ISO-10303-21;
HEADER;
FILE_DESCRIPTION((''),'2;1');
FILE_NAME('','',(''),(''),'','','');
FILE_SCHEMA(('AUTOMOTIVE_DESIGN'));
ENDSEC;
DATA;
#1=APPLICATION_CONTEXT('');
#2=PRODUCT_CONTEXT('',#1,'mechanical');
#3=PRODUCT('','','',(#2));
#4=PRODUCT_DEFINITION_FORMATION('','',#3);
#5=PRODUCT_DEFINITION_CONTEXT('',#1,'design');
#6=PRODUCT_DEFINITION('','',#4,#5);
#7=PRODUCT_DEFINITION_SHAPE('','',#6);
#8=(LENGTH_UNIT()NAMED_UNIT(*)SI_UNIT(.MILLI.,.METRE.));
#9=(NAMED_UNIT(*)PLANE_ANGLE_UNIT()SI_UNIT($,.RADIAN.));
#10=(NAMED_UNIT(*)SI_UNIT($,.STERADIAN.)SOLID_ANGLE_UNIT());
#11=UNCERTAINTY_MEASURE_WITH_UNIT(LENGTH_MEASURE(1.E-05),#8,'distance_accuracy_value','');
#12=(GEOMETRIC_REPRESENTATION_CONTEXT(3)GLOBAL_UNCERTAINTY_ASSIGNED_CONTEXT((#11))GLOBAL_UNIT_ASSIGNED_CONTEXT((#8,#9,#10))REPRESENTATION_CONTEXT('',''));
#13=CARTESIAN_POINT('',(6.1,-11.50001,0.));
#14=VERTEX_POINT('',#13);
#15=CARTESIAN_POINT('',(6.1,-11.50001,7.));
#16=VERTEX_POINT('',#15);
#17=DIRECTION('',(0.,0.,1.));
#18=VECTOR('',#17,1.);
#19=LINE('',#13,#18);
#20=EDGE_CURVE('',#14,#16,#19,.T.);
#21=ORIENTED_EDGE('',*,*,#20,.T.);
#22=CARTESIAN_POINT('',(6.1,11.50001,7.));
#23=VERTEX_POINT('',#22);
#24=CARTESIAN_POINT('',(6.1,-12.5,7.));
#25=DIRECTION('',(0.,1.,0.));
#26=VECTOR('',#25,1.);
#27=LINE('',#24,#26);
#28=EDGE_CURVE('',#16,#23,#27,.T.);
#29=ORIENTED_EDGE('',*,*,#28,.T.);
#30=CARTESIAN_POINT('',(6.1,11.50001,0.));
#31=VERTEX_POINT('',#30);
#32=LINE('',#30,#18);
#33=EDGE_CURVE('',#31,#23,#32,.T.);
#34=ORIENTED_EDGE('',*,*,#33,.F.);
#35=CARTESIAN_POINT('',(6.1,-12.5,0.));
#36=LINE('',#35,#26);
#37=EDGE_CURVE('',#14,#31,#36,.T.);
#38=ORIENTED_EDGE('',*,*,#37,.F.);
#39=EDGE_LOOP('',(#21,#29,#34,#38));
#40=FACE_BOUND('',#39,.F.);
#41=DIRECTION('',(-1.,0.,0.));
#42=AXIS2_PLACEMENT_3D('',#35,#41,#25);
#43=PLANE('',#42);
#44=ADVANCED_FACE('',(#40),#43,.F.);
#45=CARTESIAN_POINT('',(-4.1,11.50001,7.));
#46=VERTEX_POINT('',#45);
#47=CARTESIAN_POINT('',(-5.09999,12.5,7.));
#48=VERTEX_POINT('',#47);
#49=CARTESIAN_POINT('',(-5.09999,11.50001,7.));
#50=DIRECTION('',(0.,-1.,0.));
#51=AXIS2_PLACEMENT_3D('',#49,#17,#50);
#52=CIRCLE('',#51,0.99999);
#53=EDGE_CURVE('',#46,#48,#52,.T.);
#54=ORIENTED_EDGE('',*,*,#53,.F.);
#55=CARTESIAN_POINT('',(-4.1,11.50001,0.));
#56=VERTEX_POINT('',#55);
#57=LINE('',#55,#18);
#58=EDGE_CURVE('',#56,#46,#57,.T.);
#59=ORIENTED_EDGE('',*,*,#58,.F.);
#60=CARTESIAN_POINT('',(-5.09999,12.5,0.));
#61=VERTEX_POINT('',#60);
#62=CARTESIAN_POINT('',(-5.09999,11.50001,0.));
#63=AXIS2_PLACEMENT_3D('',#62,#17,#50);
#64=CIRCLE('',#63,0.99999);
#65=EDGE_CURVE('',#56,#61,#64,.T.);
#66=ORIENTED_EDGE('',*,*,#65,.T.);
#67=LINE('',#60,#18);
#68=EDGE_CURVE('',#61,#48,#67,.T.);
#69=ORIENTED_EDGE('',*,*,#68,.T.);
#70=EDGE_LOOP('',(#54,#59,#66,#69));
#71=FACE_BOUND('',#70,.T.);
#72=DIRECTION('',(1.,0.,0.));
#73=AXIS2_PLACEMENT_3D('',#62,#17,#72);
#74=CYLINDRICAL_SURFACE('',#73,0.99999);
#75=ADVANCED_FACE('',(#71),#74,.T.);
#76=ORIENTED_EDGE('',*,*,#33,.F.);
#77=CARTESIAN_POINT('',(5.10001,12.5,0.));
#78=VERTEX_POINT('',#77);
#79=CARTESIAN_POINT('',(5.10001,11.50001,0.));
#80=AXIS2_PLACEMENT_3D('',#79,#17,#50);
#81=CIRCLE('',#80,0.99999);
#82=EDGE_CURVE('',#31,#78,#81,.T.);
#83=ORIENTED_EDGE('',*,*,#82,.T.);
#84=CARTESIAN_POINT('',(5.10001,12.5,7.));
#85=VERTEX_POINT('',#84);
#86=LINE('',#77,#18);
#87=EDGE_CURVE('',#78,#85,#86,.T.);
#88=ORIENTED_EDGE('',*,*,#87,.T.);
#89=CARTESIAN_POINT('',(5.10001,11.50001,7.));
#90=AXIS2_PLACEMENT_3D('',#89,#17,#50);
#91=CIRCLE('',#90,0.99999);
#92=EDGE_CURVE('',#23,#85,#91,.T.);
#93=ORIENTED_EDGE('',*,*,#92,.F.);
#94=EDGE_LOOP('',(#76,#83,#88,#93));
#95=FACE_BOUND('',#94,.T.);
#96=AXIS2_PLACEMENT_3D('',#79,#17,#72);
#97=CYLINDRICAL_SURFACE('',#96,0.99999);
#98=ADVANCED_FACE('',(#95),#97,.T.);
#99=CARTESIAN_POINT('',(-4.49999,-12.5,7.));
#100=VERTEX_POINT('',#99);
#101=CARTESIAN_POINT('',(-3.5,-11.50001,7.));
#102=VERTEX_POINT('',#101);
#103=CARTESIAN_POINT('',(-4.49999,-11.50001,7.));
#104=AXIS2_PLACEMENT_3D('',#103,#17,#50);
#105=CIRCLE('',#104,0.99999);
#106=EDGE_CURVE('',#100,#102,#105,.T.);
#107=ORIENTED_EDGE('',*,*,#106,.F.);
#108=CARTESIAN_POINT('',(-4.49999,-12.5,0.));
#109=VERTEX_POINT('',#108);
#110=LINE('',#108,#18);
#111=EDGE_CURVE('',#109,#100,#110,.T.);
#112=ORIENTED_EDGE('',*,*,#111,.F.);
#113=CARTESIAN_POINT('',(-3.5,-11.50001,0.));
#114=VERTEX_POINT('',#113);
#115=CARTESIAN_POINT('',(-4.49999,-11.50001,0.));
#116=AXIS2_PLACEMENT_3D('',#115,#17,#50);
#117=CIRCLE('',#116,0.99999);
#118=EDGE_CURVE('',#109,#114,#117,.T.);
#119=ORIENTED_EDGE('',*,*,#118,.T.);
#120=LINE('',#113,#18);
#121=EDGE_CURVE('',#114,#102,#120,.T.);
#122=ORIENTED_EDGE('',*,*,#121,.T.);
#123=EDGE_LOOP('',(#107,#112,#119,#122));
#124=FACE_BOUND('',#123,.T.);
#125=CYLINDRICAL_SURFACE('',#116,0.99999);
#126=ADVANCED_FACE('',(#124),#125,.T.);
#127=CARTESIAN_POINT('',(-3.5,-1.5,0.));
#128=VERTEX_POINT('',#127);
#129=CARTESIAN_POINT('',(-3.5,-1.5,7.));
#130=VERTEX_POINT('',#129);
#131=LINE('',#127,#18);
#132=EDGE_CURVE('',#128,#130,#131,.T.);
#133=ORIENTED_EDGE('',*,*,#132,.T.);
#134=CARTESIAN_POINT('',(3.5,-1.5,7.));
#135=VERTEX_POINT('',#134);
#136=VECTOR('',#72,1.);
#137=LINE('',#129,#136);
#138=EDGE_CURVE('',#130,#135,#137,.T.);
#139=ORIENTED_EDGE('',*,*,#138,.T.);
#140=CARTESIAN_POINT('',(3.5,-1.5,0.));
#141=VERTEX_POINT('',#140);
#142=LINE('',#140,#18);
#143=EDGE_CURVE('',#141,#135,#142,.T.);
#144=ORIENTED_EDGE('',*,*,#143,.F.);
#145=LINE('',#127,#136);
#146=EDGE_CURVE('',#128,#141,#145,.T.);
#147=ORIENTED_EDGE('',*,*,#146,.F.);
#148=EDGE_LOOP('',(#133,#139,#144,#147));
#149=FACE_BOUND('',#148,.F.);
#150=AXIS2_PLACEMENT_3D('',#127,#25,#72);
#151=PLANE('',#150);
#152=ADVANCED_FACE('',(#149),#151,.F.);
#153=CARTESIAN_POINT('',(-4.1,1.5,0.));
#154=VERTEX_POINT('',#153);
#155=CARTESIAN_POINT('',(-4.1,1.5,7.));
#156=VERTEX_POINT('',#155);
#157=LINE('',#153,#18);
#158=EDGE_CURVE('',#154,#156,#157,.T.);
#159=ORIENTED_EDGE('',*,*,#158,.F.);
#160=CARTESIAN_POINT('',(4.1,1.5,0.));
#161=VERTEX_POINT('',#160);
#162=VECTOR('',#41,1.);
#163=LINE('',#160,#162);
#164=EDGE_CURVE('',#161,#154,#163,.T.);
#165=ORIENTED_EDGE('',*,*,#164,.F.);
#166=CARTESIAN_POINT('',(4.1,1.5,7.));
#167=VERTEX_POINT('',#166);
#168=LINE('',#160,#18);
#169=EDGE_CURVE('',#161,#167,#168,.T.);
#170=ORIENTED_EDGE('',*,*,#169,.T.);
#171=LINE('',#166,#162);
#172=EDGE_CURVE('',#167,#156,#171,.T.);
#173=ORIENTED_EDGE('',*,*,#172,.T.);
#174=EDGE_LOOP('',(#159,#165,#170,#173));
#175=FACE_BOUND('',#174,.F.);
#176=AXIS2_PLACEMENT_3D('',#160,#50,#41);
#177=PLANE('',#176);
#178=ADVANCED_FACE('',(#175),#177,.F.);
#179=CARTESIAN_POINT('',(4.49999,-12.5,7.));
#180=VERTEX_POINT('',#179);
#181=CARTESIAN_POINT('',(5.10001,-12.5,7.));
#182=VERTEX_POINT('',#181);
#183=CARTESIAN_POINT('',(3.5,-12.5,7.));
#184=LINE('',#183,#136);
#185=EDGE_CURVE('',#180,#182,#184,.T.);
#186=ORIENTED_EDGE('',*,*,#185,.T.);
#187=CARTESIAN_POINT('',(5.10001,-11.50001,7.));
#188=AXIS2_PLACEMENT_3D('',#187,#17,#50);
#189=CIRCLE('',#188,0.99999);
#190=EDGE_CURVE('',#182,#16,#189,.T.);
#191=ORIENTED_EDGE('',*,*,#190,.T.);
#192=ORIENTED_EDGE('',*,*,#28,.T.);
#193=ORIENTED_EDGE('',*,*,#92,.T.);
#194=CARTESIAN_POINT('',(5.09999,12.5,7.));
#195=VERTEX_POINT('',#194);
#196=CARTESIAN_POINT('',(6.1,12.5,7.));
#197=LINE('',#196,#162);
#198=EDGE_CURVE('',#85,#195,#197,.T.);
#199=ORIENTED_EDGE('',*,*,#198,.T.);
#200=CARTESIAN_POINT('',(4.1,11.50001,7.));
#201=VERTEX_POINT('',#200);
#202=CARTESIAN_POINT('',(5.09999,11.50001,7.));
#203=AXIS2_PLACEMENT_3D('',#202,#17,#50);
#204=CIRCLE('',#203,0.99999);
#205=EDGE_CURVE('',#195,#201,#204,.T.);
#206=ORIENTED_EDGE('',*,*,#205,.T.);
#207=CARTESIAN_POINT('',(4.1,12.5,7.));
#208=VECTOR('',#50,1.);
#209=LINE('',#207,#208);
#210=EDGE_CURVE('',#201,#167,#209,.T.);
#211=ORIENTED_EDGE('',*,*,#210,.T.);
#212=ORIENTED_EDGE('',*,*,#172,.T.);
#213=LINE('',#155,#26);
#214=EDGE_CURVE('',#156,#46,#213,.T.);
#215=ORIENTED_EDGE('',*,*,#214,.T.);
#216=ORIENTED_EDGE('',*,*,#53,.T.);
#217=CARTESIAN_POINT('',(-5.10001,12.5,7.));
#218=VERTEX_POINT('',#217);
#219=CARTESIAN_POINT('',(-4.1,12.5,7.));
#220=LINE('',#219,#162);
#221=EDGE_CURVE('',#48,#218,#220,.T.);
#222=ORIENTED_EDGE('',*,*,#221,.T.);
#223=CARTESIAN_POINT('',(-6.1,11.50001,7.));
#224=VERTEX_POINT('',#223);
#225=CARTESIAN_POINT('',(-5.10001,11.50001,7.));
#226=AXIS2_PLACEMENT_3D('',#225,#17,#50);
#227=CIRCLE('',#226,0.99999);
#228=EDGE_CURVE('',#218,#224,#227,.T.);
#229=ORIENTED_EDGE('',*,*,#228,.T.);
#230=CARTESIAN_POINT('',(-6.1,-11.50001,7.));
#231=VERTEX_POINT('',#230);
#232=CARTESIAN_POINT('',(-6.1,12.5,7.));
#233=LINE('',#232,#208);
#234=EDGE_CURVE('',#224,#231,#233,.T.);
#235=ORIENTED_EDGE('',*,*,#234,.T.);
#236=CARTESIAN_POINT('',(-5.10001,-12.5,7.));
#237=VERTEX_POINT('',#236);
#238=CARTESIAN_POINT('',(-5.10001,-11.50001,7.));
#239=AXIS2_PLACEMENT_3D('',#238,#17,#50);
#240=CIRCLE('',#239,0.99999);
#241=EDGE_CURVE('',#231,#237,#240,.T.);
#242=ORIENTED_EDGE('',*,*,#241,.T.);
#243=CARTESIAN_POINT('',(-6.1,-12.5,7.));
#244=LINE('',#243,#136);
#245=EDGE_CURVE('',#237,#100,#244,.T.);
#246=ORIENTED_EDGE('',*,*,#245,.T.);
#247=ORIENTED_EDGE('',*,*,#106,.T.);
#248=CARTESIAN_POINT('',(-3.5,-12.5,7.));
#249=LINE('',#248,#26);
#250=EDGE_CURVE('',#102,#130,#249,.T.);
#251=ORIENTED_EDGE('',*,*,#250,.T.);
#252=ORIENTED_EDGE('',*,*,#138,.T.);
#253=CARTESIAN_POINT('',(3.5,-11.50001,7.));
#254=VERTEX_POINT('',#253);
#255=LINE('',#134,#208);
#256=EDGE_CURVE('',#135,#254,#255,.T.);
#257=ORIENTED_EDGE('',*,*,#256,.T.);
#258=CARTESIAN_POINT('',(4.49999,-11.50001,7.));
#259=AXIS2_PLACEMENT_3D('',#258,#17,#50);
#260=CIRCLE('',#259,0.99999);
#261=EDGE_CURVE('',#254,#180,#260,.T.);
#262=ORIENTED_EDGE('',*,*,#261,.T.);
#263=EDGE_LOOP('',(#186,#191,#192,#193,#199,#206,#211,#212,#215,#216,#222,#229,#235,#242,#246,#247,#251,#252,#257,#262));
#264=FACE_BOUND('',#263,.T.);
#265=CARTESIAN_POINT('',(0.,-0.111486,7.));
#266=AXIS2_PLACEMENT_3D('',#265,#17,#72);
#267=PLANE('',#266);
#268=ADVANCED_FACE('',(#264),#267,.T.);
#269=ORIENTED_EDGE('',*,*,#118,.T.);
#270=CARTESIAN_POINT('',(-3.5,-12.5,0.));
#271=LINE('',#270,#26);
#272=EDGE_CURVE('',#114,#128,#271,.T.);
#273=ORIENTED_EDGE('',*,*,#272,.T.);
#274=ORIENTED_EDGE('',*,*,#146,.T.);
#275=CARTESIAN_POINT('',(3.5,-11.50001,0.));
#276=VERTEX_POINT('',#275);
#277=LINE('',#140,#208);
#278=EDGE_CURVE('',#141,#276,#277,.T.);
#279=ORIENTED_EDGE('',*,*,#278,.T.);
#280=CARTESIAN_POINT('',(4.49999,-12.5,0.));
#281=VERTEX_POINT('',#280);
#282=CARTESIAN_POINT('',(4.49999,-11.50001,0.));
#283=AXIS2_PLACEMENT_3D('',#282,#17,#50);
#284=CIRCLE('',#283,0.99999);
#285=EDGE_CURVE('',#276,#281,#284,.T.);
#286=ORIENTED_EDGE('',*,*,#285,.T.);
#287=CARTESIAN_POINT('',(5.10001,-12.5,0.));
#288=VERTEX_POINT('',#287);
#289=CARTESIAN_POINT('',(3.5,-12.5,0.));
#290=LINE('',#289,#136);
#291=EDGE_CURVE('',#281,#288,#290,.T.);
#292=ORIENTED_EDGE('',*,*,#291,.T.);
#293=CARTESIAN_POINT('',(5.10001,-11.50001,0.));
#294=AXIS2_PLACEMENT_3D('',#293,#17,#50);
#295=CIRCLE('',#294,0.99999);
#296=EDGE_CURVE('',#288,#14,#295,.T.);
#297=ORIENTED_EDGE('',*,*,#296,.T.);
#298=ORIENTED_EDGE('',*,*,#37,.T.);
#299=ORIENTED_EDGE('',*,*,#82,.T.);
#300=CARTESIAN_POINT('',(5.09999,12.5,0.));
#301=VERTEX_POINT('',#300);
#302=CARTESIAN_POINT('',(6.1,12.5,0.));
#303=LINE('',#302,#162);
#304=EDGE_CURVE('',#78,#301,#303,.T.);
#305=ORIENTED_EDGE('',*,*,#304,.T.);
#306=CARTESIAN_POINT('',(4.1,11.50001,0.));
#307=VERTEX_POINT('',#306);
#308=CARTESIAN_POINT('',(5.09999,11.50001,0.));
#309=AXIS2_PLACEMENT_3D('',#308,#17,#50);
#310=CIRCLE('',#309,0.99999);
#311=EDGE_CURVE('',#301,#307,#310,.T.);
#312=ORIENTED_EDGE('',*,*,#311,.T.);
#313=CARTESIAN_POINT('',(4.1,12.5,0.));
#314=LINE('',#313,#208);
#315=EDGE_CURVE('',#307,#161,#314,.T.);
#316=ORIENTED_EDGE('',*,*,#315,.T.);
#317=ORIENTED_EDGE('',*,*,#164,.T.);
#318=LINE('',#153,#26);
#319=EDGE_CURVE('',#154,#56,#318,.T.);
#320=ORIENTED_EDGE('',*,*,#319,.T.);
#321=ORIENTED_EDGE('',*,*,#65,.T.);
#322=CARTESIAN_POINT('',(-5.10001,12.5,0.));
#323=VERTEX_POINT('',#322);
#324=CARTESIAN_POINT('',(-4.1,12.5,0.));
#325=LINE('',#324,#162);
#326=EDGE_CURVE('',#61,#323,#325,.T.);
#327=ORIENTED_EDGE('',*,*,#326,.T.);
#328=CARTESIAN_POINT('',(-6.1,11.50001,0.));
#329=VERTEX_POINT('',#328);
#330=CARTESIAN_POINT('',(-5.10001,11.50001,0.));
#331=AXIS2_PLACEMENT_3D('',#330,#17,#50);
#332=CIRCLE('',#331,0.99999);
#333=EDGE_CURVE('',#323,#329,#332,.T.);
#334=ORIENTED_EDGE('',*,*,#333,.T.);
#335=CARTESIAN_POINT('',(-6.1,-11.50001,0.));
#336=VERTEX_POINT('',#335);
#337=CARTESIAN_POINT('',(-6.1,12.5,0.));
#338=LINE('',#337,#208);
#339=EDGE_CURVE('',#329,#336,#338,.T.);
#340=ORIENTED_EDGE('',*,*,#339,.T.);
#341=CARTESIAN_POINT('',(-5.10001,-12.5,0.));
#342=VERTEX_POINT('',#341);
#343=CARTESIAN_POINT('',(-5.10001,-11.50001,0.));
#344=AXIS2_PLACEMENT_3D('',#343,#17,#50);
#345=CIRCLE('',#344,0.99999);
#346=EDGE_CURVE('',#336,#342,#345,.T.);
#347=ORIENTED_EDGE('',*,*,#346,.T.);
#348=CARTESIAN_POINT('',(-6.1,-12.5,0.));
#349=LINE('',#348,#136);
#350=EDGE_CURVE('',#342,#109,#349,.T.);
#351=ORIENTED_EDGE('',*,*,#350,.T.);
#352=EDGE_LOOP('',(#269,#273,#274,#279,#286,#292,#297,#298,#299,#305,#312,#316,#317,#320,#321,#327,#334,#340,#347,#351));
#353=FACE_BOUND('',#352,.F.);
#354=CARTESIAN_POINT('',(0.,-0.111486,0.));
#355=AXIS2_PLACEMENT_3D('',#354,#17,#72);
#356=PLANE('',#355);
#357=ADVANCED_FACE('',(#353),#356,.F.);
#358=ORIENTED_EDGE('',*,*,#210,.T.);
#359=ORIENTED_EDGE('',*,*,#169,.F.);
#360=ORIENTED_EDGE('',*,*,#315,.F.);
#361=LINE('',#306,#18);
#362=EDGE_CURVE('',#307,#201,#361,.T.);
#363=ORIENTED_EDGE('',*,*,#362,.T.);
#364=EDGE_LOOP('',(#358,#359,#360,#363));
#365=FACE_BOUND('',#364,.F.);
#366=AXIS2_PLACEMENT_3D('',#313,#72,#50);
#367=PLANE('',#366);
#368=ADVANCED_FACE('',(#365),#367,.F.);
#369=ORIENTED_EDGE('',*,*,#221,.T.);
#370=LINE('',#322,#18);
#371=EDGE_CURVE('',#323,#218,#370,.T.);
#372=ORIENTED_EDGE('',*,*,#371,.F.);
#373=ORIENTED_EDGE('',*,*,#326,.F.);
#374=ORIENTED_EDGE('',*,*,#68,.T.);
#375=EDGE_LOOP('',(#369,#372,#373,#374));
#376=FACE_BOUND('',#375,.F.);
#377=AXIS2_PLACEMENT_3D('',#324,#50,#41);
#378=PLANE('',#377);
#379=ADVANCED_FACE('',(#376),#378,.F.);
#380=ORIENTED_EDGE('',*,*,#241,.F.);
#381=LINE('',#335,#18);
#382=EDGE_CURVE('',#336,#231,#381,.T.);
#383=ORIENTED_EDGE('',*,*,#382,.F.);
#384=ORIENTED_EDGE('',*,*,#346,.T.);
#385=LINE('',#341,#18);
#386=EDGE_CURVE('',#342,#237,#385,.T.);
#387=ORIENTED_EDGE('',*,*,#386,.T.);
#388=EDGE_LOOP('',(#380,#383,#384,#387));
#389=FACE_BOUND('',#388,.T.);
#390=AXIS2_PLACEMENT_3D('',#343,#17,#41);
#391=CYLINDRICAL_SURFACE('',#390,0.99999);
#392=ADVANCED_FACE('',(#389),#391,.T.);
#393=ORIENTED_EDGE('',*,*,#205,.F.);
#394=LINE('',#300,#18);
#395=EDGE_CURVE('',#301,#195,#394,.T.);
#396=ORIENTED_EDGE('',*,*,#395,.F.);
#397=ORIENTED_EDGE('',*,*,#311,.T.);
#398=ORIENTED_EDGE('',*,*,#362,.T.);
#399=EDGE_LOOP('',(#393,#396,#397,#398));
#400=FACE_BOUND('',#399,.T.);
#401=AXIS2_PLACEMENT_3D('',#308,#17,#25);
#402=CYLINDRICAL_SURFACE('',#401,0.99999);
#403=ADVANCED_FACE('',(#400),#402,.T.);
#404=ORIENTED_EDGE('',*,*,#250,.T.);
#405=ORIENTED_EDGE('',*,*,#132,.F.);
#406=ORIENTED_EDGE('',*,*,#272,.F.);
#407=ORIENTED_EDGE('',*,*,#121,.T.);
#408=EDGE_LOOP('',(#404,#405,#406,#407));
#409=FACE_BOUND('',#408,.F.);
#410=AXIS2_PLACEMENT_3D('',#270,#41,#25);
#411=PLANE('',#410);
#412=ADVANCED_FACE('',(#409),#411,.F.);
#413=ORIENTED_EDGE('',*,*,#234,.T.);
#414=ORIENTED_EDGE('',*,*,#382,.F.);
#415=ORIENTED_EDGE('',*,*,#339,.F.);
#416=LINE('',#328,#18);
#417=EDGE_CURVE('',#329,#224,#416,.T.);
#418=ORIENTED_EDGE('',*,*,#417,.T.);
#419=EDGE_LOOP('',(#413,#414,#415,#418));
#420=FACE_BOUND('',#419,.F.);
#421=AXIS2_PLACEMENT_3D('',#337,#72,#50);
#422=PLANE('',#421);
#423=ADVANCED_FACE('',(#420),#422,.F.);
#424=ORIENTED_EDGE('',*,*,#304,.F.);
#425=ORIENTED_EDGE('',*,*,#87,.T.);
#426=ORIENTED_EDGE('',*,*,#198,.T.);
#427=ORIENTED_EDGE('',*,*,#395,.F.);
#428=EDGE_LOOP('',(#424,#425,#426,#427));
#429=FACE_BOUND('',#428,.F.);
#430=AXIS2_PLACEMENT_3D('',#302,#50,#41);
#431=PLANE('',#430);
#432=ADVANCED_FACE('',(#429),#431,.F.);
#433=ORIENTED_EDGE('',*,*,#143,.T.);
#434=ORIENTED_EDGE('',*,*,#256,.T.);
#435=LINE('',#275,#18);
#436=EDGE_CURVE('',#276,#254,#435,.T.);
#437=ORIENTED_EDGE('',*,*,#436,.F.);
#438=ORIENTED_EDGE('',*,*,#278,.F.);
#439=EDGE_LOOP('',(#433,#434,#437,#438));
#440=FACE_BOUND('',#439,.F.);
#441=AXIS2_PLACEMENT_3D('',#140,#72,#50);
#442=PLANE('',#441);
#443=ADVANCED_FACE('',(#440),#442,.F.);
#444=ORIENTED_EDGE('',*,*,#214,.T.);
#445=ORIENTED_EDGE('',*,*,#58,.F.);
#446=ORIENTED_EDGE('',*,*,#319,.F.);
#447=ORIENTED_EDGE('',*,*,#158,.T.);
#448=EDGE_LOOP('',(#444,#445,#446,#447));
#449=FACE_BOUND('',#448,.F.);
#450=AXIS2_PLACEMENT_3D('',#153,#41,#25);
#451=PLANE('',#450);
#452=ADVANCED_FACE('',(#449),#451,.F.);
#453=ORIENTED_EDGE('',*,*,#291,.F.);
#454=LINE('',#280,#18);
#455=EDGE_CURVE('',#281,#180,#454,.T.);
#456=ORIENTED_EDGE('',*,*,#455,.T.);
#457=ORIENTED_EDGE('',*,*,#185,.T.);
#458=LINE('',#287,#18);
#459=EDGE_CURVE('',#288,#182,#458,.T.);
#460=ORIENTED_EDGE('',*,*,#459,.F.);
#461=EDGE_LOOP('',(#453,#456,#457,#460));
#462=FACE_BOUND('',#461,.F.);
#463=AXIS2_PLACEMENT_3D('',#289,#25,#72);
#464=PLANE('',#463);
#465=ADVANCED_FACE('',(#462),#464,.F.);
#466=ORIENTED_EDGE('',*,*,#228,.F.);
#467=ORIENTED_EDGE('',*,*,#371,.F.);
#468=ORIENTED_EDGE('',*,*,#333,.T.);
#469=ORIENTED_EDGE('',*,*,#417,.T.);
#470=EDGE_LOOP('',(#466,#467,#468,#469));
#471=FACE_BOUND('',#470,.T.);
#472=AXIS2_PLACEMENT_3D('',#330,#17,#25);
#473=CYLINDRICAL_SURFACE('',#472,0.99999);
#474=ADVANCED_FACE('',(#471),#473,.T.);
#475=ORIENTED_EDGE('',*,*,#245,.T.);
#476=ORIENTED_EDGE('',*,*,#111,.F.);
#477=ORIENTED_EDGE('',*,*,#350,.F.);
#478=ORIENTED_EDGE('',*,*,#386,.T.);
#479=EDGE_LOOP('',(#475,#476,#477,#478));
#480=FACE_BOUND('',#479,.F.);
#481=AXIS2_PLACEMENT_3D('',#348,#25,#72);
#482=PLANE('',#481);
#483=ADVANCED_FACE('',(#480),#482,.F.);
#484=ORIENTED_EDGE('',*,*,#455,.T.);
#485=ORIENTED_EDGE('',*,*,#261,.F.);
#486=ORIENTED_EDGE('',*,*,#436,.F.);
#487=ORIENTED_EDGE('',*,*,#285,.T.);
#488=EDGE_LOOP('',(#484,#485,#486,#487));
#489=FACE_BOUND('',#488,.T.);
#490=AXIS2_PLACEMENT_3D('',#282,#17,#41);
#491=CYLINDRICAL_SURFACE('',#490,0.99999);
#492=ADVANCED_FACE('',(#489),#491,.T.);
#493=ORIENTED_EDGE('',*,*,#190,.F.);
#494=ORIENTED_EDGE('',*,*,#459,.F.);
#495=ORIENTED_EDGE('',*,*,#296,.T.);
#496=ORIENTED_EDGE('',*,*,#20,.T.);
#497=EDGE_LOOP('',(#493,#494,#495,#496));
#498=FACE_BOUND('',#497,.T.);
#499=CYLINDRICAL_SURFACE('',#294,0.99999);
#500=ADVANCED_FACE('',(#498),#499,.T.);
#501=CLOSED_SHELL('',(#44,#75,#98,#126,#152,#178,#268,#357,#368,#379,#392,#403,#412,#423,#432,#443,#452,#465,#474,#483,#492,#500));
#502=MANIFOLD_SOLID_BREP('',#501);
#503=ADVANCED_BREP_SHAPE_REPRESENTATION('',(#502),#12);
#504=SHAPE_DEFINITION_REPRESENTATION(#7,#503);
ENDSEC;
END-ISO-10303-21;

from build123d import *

# Parameters (mm, degrees)
F1_DEPTH = 7
F2_R     = 0.99999


# Not quite as in the source:
# - a fillet or chamfer is up to 0.001 mm smaller than in the source, because OpenCascade refuses the exact size


with BuildPart() as f1:
    # F0 (on Top) → F1 (new body)
    with BuildSketch(Plane.XY):
        Polygon((4.1, 1.5), (0, 1.5), (-4.1, 1.5), (-4.1, 12.5), (-6.1, 12.5), (-6.1, -12.5), (-3.5, -12.5), (-3.5, -1.5), (0, -1.5), (3.5, -1.5), (3.5, -12.5), (6.1, -12.5), (6.1, 12.5), (4.1, 12.5), align=None)
    extrude(amount=F1_DEPTH)

    # F2 (radius 1 in the source; OpenCascade refuses exactly that, so slightly less here)
    f2_edges = [f1.edges().sort_by_distance(p)[0] for p in [
        (3.5, -12.5, 3.5),
        (6.1, -12.5, 3.5),
        (-3.5, -12.5, 3.5),
        (-6.1, -12.5, 3.5),
        (6.1, 12.5, 3.5),
        (4.1, 12.5, 3.5),
        (-4.1, 12.5, 3.5),
        (-6.1, 12.5, 3.5),
    ]]
    fillet(f2_edges, radius=F2_R)


solid = f1.part
